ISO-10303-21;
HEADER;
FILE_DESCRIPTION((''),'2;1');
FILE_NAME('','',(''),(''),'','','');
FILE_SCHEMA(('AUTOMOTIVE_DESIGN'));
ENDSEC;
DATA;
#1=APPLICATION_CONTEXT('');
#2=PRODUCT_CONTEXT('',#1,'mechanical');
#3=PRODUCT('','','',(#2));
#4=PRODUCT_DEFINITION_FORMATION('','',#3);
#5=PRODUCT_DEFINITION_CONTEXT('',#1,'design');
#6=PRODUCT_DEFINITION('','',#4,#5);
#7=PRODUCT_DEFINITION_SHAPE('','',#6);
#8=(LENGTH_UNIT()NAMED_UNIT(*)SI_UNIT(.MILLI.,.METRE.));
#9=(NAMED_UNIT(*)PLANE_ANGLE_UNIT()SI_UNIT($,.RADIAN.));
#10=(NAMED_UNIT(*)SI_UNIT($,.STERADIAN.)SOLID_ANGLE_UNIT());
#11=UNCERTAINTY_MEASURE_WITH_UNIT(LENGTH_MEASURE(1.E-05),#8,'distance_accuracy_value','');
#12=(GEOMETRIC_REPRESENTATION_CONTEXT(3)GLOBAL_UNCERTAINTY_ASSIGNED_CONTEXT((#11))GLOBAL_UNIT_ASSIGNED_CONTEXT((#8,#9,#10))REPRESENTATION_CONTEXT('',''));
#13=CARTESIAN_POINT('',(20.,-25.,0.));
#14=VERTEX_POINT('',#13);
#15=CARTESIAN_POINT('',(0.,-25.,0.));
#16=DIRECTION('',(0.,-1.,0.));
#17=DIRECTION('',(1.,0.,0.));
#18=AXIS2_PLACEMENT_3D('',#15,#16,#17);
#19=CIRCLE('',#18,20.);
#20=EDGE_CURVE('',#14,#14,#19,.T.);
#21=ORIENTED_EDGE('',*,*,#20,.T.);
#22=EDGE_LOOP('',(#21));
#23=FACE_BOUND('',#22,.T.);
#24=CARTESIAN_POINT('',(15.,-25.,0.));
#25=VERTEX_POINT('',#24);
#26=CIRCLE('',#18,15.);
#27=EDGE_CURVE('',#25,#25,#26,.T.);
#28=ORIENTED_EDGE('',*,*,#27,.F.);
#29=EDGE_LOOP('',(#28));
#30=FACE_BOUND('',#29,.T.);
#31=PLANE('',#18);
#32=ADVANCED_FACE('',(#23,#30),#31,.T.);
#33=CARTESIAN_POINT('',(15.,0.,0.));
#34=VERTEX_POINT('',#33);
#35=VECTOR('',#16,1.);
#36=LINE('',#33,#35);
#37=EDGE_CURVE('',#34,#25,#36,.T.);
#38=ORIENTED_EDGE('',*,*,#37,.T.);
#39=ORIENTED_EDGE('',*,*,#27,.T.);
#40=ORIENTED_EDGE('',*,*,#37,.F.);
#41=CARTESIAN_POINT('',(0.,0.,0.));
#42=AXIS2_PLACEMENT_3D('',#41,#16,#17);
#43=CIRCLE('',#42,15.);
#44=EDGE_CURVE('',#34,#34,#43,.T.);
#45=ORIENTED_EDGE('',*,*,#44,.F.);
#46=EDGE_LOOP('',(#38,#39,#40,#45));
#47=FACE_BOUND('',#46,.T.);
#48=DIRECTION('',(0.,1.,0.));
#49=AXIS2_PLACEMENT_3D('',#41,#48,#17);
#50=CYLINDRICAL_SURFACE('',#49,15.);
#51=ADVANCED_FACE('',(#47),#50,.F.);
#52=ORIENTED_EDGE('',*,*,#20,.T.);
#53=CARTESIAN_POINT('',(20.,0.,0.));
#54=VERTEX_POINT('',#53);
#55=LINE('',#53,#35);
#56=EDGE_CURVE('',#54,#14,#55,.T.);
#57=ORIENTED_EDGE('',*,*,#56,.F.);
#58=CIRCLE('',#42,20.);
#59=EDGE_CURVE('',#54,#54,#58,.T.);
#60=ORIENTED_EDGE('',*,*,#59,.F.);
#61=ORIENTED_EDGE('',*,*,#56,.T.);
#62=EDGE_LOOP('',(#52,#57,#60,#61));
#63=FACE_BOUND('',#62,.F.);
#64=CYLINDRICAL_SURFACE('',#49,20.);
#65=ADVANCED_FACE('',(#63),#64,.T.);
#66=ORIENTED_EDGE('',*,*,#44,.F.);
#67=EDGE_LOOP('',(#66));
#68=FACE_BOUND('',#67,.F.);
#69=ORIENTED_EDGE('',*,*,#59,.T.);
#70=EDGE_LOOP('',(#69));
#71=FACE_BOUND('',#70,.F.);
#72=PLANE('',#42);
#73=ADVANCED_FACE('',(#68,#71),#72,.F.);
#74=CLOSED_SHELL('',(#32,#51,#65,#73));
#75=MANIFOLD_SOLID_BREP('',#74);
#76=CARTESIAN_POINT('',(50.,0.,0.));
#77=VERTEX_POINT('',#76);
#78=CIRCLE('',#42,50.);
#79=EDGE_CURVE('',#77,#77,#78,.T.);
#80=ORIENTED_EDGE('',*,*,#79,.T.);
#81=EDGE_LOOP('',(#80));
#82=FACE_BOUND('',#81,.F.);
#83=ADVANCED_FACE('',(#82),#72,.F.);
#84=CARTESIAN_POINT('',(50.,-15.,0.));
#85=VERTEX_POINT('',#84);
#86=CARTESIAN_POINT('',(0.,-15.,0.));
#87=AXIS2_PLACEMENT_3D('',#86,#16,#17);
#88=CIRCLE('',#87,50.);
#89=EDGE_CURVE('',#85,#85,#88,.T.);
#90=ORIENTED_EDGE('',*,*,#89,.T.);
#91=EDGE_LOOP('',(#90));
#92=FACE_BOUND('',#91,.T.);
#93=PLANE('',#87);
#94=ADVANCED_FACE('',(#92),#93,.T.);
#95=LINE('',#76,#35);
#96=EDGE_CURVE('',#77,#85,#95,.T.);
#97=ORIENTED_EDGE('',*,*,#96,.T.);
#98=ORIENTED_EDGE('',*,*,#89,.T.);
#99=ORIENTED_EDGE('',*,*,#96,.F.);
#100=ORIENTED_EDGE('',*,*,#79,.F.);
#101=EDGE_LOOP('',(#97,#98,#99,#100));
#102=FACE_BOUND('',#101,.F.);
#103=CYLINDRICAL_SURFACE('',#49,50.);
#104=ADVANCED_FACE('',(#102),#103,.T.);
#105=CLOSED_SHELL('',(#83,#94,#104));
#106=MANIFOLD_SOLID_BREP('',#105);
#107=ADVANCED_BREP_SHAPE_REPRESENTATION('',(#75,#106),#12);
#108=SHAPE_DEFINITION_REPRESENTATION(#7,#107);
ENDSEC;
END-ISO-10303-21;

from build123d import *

# Parameters (mm, degrees)
F0_R     = 50
F1_DEPTH = 15
F3_R     = 20
F4_DEPTH = 25
F2_R     = 15


with BuildPart() as f1:
    # F0 (on Front) → F1 (new body)
    with BuildSketch(Plane.XZ):
        Circle(F0_R)
    extrude(amount=F1_DEPTH)


with BuildPart() as f4:
    # F3 (on Front) → F4 (new body)
    with BuildSketch(Plane.XZ):
        Circle(F3_R)
    extrude(amount=F4_DEPTH)


with BuildPart() as f4b:
    # F2 (on Front) → F4, piece 2 (new body)
    with BuildSketch(Plane.XZ):
        Circle(F2_R)
    extrude(amount=F4_DEPTH)


with BuildPart() as f4_1:
    add(f4.part)

    # F5: cut F4b
    add(f4b.part, mode=Mode.SUBTRACT)


solid = Compound([f1.part, f4_1.part])
